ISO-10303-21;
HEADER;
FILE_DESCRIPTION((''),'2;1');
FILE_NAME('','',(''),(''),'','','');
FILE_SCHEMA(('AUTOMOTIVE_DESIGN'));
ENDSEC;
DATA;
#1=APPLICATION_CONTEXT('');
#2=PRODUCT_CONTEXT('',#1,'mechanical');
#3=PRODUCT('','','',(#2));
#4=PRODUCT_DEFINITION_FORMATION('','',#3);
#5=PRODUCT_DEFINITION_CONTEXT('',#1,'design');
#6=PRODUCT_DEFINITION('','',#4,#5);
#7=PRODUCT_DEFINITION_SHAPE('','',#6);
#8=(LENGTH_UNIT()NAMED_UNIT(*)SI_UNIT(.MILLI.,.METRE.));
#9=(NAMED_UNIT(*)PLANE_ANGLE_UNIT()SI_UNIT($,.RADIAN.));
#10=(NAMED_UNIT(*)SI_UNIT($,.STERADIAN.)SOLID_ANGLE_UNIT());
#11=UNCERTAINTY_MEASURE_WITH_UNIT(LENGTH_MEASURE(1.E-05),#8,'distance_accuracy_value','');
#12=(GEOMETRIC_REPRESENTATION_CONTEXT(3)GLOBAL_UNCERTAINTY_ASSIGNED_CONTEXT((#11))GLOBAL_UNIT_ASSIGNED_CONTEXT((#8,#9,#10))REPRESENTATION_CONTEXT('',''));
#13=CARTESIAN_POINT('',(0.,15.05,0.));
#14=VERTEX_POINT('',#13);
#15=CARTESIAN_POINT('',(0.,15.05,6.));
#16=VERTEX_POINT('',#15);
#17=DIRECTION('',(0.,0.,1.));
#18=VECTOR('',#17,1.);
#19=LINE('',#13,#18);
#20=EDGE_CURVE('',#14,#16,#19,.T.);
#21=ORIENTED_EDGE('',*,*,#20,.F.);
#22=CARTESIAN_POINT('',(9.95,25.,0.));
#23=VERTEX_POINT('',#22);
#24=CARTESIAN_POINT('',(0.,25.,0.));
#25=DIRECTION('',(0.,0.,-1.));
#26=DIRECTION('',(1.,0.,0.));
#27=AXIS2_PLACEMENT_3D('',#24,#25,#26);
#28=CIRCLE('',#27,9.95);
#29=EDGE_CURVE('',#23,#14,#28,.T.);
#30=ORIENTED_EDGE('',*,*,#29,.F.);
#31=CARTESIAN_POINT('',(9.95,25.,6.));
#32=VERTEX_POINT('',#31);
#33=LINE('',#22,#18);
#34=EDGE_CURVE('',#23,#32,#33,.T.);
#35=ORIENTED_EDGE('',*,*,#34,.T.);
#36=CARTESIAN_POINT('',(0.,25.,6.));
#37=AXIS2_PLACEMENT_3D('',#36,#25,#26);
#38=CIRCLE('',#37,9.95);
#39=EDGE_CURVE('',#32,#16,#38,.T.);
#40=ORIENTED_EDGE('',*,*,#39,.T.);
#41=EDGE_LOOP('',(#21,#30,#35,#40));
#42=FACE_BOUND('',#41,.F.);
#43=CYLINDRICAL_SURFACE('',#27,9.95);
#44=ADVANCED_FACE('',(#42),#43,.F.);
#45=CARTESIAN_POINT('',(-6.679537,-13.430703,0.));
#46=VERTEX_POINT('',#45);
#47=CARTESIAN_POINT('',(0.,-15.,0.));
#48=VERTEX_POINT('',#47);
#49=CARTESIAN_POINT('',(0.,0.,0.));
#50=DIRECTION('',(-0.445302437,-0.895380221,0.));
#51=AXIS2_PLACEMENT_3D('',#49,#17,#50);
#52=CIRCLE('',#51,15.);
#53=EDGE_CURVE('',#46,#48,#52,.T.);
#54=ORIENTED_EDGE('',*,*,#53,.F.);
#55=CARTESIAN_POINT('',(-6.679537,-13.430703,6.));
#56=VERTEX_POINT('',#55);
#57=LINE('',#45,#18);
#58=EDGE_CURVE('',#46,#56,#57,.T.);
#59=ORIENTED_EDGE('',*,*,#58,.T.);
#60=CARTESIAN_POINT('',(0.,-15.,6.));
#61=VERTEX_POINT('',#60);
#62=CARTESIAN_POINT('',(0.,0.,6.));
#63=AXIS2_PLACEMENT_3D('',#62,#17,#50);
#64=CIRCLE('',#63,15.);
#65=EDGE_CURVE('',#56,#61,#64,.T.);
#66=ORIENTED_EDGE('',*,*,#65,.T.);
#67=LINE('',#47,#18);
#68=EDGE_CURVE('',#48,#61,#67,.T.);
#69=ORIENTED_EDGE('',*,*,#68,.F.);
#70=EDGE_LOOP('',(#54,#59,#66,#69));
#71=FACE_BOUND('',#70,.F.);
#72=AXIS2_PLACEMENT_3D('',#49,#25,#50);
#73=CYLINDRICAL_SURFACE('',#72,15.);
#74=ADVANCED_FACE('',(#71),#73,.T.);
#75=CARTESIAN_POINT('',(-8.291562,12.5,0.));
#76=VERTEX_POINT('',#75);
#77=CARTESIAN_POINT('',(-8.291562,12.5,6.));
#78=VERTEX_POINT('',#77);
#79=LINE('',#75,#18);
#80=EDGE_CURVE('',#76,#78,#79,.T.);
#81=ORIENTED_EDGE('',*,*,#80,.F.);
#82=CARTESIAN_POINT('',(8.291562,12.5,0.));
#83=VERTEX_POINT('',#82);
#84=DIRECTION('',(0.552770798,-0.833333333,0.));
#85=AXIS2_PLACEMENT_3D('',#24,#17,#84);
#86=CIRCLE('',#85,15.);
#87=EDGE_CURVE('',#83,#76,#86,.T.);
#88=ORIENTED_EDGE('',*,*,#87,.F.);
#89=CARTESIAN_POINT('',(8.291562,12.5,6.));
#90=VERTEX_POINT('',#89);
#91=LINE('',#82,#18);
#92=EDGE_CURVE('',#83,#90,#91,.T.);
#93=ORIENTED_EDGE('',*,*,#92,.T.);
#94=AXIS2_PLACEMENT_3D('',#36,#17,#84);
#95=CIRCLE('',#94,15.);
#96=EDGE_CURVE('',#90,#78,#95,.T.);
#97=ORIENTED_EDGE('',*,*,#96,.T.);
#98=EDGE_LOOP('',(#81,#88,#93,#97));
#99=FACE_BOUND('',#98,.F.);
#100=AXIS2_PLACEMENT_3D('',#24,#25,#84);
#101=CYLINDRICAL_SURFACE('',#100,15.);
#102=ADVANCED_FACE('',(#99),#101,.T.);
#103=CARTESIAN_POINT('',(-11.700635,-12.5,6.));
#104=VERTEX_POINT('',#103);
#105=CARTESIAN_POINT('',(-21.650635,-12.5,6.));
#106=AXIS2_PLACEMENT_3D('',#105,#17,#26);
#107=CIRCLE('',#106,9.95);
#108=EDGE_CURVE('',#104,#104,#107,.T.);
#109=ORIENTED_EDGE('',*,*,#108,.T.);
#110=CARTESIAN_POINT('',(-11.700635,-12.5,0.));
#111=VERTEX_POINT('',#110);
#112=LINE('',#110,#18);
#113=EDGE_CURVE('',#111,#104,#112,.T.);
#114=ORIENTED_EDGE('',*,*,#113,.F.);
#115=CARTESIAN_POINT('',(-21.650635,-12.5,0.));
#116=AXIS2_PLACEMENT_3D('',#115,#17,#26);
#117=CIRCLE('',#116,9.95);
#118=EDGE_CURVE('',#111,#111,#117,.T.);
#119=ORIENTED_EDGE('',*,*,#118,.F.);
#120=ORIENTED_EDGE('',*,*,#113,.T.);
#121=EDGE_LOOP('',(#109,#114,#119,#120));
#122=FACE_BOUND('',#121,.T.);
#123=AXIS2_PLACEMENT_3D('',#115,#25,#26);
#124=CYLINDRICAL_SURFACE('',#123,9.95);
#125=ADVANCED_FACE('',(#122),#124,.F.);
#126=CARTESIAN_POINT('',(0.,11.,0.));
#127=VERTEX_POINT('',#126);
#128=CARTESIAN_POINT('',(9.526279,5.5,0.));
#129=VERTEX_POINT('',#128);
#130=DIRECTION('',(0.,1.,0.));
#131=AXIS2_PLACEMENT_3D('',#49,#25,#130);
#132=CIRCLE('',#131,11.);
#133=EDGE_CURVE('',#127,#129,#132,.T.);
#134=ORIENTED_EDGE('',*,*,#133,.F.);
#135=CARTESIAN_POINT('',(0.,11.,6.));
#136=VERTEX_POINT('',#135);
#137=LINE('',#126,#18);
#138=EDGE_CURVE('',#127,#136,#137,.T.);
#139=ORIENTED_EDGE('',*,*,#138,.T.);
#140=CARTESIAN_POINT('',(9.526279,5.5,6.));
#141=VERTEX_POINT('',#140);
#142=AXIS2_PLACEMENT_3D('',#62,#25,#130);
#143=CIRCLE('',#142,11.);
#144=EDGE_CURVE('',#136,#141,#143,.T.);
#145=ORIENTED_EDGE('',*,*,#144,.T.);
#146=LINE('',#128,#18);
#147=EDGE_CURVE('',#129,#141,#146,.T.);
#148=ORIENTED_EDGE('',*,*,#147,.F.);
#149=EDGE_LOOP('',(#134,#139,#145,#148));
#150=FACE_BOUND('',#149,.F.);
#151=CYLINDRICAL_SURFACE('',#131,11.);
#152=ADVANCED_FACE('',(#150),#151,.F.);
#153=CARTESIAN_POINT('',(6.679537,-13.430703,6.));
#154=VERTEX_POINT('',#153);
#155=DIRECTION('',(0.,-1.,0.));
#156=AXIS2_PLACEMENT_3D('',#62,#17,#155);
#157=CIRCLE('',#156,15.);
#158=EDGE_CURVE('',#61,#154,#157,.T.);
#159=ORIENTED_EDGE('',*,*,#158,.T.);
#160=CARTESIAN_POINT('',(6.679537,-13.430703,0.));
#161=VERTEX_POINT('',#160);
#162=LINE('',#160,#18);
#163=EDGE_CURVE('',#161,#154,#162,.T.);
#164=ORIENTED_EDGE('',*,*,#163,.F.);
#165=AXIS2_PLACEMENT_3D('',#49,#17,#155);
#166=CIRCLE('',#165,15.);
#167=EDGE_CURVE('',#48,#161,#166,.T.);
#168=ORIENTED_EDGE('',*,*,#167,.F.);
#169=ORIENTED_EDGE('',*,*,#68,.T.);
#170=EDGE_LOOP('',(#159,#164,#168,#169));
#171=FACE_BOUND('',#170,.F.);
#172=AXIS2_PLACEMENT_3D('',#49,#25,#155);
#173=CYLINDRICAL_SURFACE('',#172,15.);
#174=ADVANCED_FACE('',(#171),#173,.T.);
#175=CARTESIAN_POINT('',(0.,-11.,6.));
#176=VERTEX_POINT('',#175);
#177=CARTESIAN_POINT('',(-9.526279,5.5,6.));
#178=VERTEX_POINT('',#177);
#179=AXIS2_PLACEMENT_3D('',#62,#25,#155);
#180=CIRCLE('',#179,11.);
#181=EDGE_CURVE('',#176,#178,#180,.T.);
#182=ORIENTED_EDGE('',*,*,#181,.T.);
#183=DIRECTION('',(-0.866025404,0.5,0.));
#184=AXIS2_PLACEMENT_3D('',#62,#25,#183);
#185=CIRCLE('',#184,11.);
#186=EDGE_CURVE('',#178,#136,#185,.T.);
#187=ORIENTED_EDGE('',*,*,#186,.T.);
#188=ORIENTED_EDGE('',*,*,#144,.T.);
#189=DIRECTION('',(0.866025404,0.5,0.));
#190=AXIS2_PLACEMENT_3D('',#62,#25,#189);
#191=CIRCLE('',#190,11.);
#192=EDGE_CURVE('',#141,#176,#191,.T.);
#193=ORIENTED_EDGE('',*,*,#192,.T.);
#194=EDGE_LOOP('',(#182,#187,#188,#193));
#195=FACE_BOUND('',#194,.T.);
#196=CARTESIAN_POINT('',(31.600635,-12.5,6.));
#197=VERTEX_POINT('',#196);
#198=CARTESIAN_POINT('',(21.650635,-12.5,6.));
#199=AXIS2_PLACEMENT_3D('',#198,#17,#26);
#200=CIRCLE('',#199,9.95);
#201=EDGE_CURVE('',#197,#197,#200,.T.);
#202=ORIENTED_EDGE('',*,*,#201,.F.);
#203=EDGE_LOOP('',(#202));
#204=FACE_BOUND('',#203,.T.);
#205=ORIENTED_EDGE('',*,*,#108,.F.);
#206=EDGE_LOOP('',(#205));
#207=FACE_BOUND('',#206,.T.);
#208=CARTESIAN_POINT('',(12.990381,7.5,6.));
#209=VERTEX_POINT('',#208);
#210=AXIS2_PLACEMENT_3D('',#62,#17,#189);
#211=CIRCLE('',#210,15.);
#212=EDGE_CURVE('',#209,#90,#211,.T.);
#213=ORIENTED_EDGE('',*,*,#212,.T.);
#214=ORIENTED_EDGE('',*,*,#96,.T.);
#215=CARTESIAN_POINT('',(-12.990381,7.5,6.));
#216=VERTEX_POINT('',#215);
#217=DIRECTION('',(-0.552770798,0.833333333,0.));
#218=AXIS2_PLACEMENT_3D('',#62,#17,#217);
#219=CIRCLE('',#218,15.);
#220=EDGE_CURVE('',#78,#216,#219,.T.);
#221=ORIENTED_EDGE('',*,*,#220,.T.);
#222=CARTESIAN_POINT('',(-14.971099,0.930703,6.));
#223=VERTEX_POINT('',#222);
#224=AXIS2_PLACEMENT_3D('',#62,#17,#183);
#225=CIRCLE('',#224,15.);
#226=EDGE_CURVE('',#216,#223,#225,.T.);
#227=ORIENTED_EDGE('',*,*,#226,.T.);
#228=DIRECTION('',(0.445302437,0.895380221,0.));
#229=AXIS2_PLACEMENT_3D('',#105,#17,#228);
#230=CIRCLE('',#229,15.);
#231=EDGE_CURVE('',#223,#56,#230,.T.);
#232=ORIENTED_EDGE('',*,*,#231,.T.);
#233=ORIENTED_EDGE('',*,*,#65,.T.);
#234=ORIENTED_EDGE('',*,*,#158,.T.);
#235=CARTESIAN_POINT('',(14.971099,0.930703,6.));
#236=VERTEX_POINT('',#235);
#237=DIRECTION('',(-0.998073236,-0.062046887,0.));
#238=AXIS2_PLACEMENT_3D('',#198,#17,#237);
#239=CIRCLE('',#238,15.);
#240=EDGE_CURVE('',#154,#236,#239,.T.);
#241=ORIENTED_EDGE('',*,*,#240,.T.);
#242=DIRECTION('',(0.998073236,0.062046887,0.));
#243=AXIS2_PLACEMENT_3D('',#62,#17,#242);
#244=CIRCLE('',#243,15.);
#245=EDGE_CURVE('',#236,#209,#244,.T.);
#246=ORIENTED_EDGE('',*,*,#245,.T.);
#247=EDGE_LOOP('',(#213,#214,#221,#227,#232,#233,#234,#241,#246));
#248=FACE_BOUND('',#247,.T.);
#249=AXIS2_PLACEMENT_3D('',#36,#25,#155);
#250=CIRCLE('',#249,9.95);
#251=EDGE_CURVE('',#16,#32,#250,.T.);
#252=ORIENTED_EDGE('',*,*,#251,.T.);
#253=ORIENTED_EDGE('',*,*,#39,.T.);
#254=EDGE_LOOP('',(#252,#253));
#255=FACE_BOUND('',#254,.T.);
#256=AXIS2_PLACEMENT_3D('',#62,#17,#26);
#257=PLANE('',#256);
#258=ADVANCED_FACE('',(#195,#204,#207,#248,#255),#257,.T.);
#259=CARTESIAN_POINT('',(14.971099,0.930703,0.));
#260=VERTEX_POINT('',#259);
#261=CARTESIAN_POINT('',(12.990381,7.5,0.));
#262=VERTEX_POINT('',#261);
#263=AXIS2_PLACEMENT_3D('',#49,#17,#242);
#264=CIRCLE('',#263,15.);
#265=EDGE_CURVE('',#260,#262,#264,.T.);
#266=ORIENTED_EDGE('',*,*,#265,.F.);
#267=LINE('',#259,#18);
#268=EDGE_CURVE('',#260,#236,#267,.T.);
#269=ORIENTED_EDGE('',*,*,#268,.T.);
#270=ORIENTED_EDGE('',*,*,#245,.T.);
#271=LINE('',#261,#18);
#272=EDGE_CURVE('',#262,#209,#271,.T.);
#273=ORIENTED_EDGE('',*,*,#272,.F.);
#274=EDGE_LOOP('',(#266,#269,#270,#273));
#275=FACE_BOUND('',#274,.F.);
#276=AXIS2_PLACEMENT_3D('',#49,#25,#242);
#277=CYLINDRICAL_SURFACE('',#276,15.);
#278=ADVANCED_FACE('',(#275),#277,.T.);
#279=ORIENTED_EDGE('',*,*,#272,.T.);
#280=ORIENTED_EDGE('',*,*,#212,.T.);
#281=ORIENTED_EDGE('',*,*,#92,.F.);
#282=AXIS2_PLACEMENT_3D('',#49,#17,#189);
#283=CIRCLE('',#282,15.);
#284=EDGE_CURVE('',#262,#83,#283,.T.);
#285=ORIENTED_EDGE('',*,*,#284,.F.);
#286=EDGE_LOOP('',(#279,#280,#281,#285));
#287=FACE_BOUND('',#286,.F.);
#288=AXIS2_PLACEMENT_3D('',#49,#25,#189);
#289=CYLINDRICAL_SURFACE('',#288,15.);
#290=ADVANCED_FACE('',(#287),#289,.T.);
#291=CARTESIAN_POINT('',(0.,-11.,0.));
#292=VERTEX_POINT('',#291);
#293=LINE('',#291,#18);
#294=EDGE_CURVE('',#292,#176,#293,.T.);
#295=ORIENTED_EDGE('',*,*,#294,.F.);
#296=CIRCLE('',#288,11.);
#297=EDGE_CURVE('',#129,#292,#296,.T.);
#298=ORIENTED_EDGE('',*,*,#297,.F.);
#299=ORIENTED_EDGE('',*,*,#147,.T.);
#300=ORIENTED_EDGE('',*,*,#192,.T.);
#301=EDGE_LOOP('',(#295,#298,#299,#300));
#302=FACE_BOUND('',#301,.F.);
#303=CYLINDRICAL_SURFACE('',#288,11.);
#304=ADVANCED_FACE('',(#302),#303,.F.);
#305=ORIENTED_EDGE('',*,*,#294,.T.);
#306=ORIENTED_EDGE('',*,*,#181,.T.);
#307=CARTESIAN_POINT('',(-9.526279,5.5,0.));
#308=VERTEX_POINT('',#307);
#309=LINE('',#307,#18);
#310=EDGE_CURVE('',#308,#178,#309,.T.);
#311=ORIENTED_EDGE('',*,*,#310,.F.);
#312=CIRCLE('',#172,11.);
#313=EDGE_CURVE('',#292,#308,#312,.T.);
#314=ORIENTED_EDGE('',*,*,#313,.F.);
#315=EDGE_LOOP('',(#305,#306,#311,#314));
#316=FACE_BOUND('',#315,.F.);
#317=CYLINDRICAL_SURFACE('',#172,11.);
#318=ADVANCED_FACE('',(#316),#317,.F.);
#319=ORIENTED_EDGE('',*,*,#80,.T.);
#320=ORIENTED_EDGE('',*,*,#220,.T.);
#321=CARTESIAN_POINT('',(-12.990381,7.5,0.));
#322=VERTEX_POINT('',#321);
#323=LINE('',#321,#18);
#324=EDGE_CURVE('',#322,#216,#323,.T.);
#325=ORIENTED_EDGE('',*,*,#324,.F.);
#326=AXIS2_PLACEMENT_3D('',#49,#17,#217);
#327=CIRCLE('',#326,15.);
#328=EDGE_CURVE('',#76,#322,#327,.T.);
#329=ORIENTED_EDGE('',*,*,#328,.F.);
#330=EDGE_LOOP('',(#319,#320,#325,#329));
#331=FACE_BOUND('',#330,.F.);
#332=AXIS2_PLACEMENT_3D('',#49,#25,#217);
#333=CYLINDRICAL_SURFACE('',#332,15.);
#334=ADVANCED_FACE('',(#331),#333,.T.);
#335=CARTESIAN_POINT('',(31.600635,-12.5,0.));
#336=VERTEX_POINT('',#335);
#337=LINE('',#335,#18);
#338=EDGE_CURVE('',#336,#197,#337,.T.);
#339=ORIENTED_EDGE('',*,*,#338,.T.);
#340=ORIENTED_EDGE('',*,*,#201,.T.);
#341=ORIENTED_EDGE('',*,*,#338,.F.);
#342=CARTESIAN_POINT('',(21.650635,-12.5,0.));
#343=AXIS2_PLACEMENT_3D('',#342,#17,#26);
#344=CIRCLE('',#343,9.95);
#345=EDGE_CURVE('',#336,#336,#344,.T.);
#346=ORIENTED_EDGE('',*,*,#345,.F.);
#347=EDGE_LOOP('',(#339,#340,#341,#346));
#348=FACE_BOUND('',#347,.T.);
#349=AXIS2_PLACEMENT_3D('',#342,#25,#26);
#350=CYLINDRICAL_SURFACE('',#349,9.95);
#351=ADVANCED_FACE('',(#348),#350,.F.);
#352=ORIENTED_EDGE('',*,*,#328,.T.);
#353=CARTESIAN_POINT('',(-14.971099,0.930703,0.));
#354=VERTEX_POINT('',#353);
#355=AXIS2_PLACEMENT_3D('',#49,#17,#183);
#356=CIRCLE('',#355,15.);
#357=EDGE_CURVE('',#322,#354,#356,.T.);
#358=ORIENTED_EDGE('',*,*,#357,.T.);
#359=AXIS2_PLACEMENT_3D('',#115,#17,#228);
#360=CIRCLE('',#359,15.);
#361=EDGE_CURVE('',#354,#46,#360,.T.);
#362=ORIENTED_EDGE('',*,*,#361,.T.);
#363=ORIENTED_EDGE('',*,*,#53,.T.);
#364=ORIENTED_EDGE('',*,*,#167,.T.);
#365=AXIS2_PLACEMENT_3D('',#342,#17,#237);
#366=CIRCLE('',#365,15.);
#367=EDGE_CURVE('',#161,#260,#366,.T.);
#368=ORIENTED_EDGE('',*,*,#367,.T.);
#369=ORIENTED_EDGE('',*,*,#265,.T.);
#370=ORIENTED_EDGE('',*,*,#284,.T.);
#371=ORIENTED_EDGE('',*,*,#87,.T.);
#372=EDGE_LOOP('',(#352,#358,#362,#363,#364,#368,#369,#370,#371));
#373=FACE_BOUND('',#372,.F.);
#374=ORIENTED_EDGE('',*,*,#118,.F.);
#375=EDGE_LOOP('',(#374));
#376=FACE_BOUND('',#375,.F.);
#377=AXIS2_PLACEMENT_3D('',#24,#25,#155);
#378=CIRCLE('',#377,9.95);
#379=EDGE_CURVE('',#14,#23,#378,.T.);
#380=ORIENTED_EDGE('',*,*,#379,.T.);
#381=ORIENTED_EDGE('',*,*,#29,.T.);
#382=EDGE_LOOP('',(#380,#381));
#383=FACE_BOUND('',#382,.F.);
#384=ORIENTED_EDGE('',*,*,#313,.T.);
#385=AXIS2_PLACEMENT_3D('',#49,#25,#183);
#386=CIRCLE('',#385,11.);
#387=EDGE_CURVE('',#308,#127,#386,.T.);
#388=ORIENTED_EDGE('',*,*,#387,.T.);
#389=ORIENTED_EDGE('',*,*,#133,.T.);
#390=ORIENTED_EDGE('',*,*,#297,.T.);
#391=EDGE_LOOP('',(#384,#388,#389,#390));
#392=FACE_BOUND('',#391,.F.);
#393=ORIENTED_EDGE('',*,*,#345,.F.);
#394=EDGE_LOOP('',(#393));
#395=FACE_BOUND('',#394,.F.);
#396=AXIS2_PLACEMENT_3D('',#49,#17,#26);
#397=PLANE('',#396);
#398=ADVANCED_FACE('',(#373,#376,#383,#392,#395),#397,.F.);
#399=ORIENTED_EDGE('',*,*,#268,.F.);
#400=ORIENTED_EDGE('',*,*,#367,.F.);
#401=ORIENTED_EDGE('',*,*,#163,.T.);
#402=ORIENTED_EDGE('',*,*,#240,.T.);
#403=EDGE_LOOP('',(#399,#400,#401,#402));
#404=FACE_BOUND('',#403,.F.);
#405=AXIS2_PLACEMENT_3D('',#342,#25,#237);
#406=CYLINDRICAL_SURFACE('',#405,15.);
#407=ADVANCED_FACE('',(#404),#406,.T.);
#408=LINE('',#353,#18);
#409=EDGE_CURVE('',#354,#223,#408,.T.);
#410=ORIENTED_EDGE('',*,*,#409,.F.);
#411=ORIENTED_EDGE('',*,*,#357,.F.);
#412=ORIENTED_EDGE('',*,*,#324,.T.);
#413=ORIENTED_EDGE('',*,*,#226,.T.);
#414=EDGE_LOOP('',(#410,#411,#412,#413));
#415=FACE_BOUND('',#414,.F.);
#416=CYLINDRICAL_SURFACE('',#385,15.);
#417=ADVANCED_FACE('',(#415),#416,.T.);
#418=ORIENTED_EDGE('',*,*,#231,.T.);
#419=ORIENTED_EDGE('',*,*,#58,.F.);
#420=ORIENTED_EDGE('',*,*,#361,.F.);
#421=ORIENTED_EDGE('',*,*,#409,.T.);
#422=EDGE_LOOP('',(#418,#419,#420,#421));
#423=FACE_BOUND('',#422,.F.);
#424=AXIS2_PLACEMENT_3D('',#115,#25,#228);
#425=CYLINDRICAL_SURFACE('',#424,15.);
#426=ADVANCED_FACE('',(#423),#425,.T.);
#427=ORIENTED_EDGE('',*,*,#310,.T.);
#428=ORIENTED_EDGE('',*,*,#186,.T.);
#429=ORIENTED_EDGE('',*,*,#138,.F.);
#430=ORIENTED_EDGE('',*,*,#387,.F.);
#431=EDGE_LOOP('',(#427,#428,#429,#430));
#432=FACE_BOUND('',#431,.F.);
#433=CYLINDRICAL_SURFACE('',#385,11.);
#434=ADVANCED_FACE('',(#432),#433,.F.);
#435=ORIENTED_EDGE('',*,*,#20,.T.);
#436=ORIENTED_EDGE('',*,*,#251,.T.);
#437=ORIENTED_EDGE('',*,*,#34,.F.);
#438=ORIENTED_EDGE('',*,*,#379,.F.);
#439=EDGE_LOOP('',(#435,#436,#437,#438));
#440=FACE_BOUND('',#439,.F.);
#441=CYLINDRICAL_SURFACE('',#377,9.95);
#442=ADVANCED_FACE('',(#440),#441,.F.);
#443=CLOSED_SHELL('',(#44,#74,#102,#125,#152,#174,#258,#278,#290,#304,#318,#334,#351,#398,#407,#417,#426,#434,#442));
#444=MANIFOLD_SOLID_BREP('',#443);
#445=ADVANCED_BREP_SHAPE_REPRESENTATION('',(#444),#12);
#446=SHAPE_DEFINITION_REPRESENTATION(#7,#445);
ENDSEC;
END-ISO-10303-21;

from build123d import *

# Parameters (mm, degrees)
F0_R     = 9.95
F1_DEPTH = 6


# Not quite as in the source:
# - a feature names something its author has since deleted; it is built from what else it names


with BuildPart() as f1:
    # F0 (on Top) → F1 (new body)
    with BuildSketch(Plane.XY):
        with BuildLine():
            ThreePointArc((8.2915619759, 12.5), (0, 40), (-8.2915619759, 12.5))
            ThreePointArc((-8.2915619759, 12.5), (-10.9307033082, 10.2722794544), (-12.9903810568, 7.5))
            ThreePointArc((-12.9903810568, 7.5), (-14.3614066163, 4.3301270189), (-14.9710985352, 0.9307033082))
            ThreePointArc((-14.9710985352, 0.9307033082), (-34.6410161514, -20), (-6.6795365594, -13.4307033082))
            ThreePointArc((-6.6795365594, -13.4307033082), (-3.4307033082, -14.6024064733), (0, -15))
            ThreePointArc((0, -15), (3.4307033082, -14.6024064733), (6.6795365594, -13.4307033082))
            ThreePointArc((6.6795365594, -13.4307033082), (34.6410161514, -20), (14.9710985352, 0.9307033082))
            ThreePointArc((14.9710985352, 0.9307033082), (14.3614066163, 4.3301270189), (12.9903810568, 7.5))
            ThreePointArc((12.9903810568, 7.5), (10.9307033082, 10.2722794544), (8.2915619759, 12.5))
        make_face()
        with Locations((-21.6506350946, -12.5)):
            Circle(F0_R, mode=Mode.SUBTRACT)
        with Locations((21.6506350946, -12.5)):
            Circle(F0_R, mode=Mode.SUBTRACT)
        with BuildLine():
            ThreePointArc((0, 11), (5.5, 9.5262794416), (9.5262794416, 5.5))
            ThreePointArc((9.5262794416, 5.5), (9.5262794416, -5.5), (0, -11))
            ThreePointArc((0, -11), (-9.5262794416, -5.5), (-9.5262794416, 5.5))
            ThreePointArc((-9.5262794416, 5.5), (-5.5, 9.5262794416), (0, 11))
        make_face(mode=Mode.SUBTRACT)
        with BuildLine():
            ThreePointArc((9.95, 25), (7.0357124728, 17.9642875272), (0, 15.05))
            ThreePointArc((0, 15.05), (-7.0357124728, 32.0357124728), (9.95, 25))
        make_face(mode=Mode.SUBTRACT)
    extrude(amount=F1_DEPTH)


solid = f1.part
